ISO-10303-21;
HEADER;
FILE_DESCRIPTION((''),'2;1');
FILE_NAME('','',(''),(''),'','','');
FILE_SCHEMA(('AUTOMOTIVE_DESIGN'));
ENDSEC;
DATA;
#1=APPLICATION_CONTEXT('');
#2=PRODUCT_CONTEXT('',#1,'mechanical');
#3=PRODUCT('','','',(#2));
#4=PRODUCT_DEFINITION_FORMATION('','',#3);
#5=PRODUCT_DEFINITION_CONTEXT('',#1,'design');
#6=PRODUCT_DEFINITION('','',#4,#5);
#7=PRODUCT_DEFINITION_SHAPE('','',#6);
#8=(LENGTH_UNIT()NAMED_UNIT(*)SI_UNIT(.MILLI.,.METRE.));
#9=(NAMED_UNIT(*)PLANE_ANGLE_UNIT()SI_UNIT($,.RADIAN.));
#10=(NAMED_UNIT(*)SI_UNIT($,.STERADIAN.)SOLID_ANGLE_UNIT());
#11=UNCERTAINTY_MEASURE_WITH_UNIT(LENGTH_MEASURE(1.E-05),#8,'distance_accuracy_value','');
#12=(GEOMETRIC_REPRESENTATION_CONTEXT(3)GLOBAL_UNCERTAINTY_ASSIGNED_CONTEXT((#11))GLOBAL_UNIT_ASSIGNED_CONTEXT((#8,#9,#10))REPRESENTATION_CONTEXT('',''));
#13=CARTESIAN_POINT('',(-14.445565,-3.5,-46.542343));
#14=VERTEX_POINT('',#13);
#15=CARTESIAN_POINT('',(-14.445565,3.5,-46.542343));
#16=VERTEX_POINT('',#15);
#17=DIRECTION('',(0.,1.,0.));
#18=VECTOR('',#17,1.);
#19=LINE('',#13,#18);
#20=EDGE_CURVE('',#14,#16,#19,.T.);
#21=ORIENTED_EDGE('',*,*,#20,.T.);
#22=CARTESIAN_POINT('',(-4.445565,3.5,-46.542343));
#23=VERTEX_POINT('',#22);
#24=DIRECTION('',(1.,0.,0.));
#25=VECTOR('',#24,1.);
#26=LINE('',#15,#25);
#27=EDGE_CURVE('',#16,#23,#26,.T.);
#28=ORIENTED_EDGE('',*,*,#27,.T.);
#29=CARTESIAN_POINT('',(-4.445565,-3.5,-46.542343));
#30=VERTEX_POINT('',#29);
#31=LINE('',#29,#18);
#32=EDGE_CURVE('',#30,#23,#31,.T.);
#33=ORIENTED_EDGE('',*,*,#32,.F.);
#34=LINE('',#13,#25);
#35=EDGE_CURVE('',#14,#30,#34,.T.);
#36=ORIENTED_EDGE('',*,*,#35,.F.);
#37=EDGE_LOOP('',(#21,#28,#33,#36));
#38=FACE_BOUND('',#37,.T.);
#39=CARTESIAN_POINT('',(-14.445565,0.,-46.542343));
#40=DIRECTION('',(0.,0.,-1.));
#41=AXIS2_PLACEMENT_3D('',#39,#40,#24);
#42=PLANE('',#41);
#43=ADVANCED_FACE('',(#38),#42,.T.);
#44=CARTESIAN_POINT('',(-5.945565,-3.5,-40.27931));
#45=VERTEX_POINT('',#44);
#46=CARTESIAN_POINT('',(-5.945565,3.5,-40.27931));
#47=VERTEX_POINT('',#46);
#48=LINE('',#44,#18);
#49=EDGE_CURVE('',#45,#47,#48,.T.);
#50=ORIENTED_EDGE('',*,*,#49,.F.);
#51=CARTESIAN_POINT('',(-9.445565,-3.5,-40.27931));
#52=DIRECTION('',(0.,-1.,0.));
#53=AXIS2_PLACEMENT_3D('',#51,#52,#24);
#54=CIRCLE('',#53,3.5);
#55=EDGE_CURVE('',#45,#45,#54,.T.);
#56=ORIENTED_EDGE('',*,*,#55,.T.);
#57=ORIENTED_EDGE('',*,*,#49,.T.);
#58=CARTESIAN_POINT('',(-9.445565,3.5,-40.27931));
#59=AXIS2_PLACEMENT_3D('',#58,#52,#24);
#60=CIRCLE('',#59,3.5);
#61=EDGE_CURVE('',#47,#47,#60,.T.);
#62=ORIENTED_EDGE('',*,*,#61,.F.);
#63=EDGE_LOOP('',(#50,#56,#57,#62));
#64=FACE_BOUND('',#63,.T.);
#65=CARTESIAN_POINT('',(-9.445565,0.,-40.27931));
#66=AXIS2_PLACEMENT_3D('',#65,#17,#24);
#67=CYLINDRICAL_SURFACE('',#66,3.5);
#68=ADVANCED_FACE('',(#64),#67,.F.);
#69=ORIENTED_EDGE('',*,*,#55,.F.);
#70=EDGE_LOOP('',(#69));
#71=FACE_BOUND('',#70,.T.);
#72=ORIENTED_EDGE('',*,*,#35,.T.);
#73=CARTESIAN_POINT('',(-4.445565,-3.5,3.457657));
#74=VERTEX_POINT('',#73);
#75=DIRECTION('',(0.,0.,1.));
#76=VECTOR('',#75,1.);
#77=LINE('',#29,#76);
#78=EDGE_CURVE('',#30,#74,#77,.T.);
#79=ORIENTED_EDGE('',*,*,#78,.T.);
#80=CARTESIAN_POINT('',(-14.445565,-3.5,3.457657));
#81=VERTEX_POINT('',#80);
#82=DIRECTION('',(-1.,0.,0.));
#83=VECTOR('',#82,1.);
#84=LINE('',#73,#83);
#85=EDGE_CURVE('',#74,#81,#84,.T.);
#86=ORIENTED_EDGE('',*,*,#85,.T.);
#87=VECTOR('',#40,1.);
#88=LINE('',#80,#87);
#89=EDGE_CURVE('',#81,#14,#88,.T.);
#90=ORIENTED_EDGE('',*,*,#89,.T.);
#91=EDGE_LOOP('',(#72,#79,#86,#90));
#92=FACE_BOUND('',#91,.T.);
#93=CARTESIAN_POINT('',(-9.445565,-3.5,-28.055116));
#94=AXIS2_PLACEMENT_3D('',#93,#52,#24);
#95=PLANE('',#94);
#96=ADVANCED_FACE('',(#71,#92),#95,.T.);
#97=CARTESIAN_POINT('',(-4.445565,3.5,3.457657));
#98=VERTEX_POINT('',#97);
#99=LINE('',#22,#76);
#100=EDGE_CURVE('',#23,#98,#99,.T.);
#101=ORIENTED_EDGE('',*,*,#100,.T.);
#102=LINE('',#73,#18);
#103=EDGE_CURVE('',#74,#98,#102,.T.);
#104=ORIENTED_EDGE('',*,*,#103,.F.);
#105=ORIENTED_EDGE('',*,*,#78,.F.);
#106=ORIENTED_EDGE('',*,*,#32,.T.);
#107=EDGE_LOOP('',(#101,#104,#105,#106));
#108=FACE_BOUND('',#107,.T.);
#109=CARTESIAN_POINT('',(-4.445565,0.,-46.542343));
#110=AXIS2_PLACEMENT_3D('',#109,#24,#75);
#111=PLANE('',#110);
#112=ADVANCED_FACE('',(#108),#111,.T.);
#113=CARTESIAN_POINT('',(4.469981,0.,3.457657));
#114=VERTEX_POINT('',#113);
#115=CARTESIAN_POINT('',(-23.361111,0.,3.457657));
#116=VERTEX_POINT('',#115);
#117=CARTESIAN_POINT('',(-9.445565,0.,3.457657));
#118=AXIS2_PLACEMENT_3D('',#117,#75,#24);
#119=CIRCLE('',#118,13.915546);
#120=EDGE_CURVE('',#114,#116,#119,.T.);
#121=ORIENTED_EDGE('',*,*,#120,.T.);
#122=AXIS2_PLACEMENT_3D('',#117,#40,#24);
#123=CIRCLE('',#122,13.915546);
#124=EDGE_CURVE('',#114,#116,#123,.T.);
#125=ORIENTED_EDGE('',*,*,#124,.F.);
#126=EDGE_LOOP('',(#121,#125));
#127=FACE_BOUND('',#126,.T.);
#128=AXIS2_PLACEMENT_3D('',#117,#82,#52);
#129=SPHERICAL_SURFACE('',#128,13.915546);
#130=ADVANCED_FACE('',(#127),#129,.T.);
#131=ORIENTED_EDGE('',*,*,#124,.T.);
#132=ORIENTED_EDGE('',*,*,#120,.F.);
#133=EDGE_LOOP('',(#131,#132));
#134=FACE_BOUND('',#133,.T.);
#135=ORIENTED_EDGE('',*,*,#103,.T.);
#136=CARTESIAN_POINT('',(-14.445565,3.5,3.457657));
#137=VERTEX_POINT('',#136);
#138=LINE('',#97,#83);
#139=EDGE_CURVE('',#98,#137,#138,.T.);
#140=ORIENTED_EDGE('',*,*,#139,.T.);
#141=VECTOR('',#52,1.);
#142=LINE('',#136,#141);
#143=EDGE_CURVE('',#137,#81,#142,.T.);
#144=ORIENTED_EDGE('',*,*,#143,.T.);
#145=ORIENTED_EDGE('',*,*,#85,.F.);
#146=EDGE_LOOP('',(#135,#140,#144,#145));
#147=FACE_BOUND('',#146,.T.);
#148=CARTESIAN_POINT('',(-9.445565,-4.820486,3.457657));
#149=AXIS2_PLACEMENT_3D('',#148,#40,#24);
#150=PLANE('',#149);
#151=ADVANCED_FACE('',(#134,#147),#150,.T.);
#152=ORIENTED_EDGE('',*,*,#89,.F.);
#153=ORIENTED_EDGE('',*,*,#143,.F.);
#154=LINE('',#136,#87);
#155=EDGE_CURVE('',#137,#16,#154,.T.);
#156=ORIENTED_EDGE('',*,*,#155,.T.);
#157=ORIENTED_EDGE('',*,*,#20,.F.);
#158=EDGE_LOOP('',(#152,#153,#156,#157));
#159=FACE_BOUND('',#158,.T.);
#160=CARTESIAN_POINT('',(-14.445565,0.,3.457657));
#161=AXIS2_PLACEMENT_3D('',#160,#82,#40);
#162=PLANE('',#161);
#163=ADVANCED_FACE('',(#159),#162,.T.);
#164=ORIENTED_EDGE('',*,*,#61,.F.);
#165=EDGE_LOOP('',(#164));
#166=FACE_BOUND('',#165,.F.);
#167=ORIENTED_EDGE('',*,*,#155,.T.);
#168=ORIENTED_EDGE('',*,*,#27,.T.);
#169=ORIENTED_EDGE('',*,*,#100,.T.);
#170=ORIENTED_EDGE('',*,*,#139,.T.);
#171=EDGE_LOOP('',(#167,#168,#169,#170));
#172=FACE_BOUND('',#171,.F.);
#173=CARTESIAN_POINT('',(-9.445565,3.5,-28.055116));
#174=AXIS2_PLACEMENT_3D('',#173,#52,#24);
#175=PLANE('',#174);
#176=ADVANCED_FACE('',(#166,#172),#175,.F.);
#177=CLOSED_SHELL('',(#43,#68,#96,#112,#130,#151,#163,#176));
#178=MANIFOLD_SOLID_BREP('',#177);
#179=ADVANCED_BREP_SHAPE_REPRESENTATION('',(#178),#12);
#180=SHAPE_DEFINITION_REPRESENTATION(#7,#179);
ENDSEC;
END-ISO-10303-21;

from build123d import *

# Parameters (mm, degrees)
F0_R          = 3.5
F1_DEPTH      = 3.5
F2_ANGLE_BACK = 90
F2_ANGLE      = 180


# Not quite as in the source:
# - a feature of the source that left no trace in its solid (it failed there, or was rolled back) is left out


with BuildPart() as f1:
    # F0 (on Front) → F1 (new body, symmetric)
    with BuildSketch(Plane.XZ):
        with BuildLine():
            ThreePointArc((-4.4455649331, -9.5285820105), (-9.4455649331, -10.4578883784), (-14.4455649331, -9.5285820105))
            Line((-14.4455649331, -9.5285820105), (-14.4455649331, -46.5423427522))
            Line((-14.4455649331, -46.5423427522), (-4.4455649331, -46.5423427522))
            Line((-4.4455649331, -46.5423427522), (-4.4455649331, -9.5285820105))
        make_face()
        with Locations((-9.4455649331, -40.2793101966)):
            Circle(F0_R, mode=Mode.SUBTRACT)
        with BuildLine():
            Line((-4.4455649331, 3.4576572478), (-14.4455649331, 3.4576572478))
            Line((-14.4455649331, 3.4576572478), (-14.4455649331, -9.5285820105))
            ThreePointArc((-14.4455649331, -9.5285820105), (-9.4455649331, -10.4578883784), (-4.4455649331, -9.5285820105))
            Line((-4.4455649331, -9.5285820105), (-4.4455649331, 3.4576572478))
        make_face()
    extrude(amount=F1_DEPTH, both=True)

    # F0 (on Front) → F2 (revolve)
    with BuildSketch(Plane.XZ, mode=Mode.PRIVATE) as f2_sk:
        with BuildLine():
            Line((-23.3611105593, 3.4576572478), (-14.4455649331, 3.4576572478))
            Line((-14.4455649331, 3.4576572478), (-4.4455649331, 3.4576572478))
            Line((-4.4455649331, 3.4576572478), (4.469980693, 3.4576572478))
            ThreePointArc((4.469980693, 3.4576572478), (-9.4455649331, 17.3732028739), (-23.3611105593, 3.4576572478))
        make_face()
    revolve(f2_sk.sketch.rotate(Axis((-13.6577822268, 0, 3.4576572478), (-1, 0, 0)), -F2_ANGLE_BACK), axis=Axis((-13.6577822268, 0, 3.4576572478), (-1, 0, 0)), revolution_arc=F2_ANGLE)


solid = f1.part
